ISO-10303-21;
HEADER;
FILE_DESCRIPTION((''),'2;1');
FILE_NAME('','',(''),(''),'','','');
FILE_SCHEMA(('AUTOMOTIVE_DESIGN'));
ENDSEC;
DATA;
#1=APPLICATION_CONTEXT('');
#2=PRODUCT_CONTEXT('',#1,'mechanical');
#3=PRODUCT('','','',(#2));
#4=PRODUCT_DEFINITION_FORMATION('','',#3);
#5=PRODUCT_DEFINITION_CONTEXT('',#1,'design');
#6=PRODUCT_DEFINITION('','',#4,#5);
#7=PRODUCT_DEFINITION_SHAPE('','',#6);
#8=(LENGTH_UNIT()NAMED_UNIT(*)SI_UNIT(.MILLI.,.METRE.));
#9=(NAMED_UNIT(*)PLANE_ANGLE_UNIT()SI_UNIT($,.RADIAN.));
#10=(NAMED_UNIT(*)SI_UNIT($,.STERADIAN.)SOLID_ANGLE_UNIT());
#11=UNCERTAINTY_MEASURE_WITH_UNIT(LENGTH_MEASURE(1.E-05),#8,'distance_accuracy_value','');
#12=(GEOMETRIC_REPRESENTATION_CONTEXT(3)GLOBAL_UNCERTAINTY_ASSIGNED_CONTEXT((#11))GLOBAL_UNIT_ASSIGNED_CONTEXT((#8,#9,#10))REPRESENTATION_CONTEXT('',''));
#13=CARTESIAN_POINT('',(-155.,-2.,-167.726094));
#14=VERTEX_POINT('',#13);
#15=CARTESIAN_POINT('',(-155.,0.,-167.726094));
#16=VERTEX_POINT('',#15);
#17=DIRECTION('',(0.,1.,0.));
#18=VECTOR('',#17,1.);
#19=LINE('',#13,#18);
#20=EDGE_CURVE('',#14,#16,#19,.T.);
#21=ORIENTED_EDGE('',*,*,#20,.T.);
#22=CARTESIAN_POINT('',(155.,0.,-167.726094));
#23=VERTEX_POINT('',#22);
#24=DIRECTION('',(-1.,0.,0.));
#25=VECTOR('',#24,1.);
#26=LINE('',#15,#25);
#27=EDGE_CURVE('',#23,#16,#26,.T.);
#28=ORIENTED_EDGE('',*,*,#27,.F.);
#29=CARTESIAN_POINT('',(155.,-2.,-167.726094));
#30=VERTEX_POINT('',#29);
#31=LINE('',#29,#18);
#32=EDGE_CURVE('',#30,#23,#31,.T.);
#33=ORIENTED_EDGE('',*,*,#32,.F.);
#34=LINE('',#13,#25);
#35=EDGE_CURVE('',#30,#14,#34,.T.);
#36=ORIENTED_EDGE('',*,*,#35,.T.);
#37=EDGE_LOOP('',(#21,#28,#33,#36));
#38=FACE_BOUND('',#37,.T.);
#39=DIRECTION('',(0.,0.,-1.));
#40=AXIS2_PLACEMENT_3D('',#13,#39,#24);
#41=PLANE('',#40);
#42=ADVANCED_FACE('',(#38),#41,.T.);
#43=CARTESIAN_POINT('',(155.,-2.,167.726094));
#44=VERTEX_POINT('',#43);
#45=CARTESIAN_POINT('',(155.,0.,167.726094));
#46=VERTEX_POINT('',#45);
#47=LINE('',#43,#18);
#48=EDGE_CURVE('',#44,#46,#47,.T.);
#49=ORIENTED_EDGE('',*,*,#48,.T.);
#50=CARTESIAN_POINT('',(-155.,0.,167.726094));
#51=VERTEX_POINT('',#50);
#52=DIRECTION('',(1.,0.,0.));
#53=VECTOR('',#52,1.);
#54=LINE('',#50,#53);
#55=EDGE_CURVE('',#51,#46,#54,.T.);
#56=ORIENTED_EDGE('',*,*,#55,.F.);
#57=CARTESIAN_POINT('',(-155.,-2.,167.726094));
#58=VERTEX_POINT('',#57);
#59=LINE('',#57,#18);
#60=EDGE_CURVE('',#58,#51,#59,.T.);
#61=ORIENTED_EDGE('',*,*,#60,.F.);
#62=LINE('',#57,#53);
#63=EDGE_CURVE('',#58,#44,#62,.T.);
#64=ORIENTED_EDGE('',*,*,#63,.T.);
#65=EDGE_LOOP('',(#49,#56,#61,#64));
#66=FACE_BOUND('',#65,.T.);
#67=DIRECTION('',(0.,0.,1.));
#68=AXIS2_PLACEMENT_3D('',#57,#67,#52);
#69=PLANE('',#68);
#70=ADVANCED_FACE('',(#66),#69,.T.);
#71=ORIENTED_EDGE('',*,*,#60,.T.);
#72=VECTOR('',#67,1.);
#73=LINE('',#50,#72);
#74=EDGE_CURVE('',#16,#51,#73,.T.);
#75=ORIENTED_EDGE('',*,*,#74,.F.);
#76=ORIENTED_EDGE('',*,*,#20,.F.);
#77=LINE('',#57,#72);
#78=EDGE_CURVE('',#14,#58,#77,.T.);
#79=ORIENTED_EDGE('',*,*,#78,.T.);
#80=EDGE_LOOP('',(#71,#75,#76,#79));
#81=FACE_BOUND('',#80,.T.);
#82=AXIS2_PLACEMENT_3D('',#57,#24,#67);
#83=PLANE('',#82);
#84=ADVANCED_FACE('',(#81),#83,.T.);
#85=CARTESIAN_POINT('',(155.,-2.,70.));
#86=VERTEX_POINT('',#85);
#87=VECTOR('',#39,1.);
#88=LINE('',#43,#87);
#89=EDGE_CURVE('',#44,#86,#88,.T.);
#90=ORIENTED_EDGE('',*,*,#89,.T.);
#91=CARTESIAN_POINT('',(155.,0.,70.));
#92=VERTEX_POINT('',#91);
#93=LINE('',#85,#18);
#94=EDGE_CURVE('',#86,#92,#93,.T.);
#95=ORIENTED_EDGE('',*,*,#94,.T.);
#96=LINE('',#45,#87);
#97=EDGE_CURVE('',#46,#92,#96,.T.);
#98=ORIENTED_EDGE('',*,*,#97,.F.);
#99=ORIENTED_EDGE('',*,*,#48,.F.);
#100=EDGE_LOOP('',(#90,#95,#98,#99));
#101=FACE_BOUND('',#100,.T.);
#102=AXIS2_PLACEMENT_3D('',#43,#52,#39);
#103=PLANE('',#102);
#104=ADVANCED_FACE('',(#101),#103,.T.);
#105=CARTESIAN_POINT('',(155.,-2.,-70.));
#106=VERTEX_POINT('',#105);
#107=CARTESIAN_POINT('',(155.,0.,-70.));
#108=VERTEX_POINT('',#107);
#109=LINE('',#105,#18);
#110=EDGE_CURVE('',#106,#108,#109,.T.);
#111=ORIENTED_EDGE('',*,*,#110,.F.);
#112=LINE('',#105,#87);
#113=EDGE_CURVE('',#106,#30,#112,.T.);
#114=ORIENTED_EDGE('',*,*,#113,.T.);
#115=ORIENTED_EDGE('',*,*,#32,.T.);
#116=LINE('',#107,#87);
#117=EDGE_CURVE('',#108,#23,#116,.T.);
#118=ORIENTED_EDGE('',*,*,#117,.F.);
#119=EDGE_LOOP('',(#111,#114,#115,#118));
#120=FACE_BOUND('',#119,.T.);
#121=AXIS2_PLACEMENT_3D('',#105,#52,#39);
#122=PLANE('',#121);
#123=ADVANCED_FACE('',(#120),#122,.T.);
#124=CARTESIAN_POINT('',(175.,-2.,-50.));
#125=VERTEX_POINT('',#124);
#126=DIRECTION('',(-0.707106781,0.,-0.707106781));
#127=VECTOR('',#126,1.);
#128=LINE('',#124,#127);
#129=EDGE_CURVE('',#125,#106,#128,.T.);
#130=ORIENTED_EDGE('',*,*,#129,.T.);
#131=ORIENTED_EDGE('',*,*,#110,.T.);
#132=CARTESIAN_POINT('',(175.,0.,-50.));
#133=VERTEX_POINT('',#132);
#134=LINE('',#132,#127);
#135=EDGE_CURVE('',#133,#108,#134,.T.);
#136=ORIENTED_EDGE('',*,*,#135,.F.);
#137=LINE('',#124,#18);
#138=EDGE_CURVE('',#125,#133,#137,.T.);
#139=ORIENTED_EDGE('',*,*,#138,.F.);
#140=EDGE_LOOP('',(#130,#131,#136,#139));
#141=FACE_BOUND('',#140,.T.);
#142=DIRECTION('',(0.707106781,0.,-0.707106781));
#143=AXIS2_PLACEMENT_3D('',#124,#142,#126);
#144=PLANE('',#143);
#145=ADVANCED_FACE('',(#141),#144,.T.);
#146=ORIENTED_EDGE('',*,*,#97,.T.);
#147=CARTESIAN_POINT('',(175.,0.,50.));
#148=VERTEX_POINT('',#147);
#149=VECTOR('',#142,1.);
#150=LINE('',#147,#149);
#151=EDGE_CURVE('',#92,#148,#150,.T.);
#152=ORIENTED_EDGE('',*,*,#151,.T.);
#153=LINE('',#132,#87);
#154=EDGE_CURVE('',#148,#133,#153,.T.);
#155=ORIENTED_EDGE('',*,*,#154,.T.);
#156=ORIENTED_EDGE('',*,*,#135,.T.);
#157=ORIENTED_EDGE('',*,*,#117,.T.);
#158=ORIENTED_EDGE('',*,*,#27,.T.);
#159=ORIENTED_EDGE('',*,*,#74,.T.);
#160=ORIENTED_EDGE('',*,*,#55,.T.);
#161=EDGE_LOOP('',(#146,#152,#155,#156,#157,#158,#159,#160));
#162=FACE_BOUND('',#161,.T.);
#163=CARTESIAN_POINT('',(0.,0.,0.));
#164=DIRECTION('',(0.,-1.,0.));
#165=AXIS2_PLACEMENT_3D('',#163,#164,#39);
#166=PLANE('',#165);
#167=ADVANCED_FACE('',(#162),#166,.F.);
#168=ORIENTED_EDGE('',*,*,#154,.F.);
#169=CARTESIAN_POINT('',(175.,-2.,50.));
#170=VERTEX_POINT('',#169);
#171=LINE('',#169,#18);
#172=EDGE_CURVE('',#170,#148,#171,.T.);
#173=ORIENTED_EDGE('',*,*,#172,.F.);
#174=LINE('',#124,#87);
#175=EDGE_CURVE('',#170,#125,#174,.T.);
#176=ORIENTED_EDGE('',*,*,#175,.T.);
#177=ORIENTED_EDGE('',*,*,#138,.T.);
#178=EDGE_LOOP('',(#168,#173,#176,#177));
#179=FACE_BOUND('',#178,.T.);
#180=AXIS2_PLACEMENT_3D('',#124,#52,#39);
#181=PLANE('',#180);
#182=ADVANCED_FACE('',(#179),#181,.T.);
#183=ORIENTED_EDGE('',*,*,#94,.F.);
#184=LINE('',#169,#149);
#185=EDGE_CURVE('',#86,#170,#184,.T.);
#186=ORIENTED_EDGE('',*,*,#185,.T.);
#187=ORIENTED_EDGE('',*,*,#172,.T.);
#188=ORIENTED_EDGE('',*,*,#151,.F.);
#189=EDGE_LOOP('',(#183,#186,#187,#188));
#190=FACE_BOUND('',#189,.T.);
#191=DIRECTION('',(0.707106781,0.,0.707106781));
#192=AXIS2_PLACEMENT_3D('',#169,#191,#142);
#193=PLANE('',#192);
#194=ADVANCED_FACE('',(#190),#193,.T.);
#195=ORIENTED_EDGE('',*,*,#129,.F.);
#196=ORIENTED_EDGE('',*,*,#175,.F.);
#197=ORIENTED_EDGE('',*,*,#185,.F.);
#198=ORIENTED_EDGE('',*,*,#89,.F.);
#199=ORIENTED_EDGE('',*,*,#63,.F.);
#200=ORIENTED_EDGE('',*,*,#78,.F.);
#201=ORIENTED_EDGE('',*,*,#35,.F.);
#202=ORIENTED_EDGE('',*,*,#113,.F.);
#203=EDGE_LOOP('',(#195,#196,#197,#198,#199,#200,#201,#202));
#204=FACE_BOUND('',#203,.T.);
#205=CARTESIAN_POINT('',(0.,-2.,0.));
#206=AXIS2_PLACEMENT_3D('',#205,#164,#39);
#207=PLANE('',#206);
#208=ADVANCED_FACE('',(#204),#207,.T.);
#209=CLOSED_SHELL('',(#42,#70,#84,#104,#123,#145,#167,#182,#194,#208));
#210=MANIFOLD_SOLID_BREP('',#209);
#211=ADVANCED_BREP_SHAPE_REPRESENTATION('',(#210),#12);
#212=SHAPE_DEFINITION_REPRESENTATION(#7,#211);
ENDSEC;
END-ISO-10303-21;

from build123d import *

# Parameters (mm, degrees)
BASE_FLANGE1_DEPTH = 2


# Sheet-metal steps are written as plain solids
with BuildPart() as part:
    # Sketch1 → Base-Flange1 (new body)
    with BuildSketch(Plane(origin=(0, 0, 0), x_dir=(1, 0, 0), z_dir=(0, 1, 0))):
        Polygon((-155, -167.726093983), (155, -167.726093983), (155, -70), (175, -50), (175, 50), (155, 70), (155, 167.726093983), (-155, 167.726093983), align=None)
    extrude(amount=-BASE_FLANGE1_DEPTH)


solid = part.part
